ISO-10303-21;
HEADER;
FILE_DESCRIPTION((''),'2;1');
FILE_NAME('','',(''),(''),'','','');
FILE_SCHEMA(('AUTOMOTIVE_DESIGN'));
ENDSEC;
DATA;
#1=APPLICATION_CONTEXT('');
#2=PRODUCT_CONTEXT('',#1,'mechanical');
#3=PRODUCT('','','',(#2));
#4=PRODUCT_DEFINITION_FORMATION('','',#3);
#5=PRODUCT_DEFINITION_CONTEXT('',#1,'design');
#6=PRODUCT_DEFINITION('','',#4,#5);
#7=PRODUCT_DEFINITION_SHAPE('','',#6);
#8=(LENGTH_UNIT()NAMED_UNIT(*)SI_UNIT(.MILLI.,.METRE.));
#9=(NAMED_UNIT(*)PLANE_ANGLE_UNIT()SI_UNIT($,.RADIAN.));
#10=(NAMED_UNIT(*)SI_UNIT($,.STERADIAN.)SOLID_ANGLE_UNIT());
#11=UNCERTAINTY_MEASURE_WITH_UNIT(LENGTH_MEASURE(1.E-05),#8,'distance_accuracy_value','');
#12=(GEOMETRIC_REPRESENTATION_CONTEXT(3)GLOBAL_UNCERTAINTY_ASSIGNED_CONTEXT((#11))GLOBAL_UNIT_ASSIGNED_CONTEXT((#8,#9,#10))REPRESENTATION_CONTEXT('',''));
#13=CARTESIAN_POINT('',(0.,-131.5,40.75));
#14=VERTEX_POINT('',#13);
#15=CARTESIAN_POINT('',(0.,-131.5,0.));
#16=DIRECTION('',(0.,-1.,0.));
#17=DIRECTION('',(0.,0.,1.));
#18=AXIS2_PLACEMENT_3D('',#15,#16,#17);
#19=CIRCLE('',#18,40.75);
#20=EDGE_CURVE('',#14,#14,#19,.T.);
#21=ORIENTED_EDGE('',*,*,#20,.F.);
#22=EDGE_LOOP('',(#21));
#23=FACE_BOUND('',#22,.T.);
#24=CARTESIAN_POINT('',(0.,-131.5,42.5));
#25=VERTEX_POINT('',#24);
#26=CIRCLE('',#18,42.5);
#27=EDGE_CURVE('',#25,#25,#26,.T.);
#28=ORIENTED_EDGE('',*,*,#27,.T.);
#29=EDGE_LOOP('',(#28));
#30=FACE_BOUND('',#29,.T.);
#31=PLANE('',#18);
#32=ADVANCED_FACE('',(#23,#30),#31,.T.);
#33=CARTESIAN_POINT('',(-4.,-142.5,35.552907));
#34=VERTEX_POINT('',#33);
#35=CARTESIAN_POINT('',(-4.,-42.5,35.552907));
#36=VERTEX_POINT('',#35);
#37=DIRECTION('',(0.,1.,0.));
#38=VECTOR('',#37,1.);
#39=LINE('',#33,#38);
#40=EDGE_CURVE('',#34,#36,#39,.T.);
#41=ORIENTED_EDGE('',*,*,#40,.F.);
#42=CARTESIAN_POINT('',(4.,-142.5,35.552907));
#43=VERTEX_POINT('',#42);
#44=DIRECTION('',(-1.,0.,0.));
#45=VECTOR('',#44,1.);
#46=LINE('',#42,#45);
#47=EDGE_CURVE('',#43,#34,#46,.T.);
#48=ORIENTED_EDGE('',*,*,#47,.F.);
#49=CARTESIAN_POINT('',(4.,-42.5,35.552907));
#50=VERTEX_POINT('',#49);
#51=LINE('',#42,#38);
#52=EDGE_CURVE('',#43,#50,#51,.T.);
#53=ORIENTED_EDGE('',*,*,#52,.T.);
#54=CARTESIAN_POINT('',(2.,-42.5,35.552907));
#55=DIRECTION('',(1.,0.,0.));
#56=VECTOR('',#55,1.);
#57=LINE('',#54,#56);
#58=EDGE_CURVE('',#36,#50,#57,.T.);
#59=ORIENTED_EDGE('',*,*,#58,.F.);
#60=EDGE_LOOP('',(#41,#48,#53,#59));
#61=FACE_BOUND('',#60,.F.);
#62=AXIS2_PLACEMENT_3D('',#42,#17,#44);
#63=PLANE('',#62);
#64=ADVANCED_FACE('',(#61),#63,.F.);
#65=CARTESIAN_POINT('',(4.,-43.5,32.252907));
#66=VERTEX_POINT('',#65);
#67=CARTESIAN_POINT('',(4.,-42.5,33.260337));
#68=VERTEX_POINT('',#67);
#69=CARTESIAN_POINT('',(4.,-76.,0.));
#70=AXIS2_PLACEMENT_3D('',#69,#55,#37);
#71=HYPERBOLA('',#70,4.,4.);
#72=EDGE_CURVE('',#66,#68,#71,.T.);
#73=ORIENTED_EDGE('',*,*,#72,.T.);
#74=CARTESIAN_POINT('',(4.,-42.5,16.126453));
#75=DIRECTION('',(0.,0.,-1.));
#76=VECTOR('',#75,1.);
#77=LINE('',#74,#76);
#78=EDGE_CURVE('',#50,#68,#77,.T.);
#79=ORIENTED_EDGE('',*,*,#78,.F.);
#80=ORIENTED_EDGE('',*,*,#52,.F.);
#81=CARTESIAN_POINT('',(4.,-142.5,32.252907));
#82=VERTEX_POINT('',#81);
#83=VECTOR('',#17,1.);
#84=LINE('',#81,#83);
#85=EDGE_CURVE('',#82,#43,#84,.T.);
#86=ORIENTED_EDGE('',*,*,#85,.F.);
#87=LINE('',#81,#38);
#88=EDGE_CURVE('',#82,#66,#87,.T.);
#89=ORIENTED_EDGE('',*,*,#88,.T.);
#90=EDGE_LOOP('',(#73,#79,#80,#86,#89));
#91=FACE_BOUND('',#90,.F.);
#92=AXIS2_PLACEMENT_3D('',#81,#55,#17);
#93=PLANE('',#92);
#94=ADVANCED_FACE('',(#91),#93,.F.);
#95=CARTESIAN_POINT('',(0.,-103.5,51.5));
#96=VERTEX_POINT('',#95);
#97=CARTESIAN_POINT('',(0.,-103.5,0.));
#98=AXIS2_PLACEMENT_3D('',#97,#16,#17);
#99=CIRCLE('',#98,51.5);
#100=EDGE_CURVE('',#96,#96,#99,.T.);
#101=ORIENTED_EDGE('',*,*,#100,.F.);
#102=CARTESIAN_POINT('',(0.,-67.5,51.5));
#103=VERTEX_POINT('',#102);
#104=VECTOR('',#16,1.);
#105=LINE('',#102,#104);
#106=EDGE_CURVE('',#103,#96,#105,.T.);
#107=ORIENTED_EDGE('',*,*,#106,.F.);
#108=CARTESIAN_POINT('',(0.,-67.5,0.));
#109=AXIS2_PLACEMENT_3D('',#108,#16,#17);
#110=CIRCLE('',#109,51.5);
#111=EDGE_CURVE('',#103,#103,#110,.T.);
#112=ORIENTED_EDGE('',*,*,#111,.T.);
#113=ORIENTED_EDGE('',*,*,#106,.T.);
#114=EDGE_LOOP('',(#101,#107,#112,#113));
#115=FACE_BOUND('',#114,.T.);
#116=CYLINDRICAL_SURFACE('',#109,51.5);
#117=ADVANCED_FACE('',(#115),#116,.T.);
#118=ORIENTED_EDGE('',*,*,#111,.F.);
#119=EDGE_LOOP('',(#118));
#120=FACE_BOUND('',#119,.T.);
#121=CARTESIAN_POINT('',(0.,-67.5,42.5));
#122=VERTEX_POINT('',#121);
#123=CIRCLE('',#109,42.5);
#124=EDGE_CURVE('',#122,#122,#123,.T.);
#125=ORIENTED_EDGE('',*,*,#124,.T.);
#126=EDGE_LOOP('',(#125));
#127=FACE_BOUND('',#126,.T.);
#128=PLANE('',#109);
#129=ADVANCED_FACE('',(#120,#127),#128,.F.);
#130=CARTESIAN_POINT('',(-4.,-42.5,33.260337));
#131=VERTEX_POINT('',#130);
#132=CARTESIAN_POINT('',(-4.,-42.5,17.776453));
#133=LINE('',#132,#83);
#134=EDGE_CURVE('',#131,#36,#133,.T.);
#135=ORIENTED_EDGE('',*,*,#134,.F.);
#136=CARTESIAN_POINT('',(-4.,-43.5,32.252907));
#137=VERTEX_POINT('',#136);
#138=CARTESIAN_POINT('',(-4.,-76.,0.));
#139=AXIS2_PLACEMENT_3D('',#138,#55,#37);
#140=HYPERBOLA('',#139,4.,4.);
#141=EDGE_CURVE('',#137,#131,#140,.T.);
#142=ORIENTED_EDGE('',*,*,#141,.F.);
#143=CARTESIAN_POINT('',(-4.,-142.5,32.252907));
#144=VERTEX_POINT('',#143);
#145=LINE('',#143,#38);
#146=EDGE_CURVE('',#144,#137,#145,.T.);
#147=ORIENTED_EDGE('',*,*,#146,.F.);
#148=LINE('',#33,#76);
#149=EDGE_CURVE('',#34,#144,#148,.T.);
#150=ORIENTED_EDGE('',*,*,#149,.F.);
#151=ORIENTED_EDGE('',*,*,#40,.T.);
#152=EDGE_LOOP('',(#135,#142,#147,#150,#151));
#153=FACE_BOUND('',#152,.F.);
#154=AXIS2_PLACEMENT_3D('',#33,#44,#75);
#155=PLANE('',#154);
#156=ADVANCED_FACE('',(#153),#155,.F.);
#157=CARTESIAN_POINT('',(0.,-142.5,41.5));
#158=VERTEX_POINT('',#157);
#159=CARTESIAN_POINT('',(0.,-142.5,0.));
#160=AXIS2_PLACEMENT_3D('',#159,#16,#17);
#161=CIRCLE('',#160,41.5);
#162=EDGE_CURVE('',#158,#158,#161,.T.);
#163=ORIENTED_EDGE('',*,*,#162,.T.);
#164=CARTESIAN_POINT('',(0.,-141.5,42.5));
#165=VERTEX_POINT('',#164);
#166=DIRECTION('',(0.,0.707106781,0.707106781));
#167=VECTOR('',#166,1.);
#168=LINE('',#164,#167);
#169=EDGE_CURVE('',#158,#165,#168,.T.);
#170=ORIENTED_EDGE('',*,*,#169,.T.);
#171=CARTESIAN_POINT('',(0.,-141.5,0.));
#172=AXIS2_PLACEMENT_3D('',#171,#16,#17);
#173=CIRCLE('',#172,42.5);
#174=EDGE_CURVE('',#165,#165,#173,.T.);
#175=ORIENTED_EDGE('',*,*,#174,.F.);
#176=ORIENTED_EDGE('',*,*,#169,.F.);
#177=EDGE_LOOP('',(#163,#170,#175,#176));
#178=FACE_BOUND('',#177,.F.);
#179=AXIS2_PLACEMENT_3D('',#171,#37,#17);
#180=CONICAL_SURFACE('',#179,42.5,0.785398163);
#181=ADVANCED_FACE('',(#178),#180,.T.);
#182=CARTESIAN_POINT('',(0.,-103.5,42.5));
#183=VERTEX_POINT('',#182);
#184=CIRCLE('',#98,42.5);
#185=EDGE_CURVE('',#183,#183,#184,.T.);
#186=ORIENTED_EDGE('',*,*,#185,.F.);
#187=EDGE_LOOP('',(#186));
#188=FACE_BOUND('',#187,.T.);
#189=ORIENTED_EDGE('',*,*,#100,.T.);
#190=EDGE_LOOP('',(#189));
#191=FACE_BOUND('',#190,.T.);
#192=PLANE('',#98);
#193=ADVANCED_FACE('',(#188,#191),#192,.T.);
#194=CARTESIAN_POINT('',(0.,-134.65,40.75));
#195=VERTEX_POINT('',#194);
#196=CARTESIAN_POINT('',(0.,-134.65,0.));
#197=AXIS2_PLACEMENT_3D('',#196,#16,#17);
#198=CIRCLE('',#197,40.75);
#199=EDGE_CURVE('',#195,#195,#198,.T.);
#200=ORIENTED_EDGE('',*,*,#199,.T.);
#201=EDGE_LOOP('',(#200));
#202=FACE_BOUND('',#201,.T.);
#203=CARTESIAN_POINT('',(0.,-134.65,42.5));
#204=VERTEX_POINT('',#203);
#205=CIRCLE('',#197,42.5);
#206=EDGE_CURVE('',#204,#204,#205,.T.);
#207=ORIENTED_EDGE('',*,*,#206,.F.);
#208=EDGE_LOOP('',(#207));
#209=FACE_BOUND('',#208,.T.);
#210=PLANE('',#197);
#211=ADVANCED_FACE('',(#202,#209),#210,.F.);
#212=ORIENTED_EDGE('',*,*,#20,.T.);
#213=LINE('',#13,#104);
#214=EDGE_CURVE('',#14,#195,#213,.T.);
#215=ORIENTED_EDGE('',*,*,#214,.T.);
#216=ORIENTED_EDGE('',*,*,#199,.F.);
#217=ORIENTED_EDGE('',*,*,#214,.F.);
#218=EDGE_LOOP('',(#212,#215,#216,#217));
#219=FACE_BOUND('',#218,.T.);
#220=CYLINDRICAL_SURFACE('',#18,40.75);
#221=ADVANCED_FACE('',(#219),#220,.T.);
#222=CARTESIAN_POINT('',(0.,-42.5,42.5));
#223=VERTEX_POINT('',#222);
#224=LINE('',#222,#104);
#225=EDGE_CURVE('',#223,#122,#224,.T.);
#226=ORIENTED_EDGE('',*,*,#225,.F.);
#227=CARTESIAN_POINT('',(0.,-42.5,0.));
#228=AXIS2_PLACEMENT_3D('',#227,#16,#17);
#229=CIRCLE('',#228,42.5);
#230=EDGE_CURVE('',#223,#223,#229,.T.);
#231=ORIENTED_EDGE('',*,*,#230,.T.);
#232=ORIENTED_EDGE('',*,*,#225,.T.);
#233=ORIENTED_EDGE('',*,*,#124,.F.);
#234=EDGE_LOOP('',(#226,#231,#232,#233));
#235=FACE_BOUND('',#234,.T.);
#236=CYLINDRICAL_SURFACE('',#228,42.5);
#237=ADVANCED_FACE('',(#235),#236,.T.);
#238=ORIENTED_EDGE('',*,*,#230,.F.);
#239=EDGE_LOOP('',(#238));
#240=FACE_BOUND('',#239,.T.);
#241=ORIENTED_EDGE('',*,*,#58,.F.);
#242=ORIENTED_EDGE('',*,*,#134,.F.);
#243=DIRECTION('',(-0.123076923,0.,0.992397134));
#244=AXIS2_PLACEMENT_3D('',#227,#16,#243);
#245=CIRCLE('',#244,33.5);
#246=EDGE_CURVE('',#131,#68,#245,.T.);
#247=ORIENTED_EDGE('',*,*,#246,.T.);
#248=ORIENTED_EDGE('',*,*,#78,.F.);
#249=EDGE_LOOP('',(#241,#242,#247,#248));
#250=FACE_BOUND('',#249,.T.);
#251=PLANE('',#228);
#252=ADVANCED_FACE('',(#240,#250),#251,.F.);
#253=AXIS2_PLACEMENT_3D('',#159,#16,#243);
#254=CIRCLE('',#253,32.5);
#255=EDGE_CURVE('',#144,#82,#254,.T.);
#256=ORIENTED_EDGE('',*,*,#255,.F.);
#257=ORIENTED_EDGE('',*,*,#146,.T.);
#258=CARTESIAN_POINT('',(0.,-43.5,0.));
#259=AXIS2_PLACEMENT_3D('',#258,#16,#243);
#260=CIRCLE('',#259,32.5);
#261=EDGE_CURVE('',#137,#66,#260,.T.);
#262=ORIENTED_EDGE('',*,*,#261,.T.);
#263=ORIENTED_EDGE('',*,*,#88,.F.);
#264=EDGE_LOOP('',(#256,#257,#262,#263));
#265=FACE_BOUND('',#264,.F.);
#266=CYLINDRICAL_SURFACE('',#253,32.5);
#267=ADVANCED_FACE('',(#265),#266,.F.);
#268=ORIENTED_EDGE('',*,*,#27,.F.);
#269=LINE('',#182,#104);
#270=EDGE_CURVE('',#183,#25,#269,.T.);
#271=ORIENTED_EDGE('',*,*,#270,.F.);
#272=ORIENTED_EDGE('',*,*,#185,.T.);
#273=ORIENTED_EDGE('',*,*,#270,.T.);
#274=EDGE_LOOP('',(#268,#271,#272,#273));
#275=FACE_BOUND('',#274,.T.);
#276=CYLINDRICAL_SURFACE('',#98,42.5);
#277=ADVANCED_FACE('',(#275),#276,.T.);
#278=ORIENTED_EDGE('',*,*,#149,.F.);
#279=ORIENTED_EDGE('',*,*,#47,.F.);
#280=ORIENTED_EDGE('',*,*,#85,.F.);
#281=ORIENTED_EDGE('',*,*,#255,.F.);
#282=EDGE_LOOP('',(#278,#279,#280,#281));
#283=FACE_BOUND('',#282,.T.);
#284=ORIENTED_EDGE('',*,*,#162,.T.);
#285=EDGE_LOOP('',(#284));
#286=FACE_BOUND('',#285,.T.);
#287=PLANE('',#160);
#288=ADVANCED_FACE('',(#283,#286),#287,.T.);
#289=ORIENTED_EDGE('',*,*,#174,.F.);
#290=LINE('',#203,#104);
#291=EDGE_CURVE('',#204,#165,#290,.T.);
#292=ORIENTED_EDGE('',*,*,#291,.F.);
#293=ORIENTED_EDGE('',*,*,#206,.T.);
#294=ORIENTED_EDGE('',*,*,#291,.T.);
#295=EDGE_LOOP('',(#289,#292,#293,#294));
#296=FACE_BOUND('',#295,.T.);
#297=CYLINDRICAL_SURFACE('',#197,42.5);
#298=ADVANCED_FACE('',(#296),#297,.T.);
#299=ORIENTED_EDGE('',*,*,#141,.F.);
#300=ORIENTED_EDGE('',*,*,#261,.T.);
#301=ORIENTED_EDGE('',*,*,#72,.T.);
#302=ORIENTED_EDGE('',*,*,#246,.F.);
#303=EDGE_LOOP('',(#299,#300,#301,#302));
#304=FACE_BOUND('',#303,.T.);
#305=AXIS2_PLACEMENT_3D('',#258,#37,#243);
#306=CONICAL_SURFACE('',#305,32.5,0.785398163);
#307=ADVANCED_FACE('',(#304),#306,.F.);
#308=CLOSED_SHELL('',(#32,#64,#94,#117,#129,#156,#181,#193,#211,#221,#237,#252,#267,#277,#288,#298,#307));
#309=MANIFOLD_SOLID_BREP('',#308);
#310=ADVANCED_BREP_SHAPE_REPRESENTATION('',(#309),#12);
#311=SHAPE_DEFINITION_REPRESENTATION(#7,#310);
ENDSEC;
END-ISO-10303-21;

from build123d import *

# Parameters (mm, degrees)
F4_DEPTH = 100.001
F5_SIZE  = 1


with BuildPart() as f1:
    # F0 (on Right) → F1 (revolve)
    with BuildSketch(Plane.YZ):
        Polygon((-142.5, 42.5), (-142.5, 0), (-42.5, 0), (-42.5, 42.5), (-67.5, 42.5), (-67.5, 51.5), (-103.5, 51.5), (-103.5, 42.5), (-131.5, 42.5), (-131.5, 40.75), (-134.65, 40.75), (-134.65, 42.5), align=None)
    revolve(axis=Axis((0, -92.5, 0), (0, -1, 0)))

    # F3 (on face) → F4 (cut, through all)
    with BuildSketch(Plane.XZ.offset(142.5)):
        with BuildLine():
            Line((-4, 35.5529068457), (-4, 32.2529068457))
            ThreePointArc((-4, 32.2529068457), (0, -32.5), (4, 32.2529068457))
            Line((4, 32.2529068457), (4, 35.5529068457))
            Line((4, 35.5529068457), (-4, 35.5529068457))
        make_face()
    extrude(amount=-F4_DEPTH, mode=Mode.SUBTRACT)

    # F5
    f5_edges = [f1.edges().sort_by_distance(p)[0] for p in [
        (0, -142.5, -42.5),
        (0, -42.5, -32.5),
    ]]
    chamfer(f5_edges, length=F5_SIZE)


solid = f1.part
